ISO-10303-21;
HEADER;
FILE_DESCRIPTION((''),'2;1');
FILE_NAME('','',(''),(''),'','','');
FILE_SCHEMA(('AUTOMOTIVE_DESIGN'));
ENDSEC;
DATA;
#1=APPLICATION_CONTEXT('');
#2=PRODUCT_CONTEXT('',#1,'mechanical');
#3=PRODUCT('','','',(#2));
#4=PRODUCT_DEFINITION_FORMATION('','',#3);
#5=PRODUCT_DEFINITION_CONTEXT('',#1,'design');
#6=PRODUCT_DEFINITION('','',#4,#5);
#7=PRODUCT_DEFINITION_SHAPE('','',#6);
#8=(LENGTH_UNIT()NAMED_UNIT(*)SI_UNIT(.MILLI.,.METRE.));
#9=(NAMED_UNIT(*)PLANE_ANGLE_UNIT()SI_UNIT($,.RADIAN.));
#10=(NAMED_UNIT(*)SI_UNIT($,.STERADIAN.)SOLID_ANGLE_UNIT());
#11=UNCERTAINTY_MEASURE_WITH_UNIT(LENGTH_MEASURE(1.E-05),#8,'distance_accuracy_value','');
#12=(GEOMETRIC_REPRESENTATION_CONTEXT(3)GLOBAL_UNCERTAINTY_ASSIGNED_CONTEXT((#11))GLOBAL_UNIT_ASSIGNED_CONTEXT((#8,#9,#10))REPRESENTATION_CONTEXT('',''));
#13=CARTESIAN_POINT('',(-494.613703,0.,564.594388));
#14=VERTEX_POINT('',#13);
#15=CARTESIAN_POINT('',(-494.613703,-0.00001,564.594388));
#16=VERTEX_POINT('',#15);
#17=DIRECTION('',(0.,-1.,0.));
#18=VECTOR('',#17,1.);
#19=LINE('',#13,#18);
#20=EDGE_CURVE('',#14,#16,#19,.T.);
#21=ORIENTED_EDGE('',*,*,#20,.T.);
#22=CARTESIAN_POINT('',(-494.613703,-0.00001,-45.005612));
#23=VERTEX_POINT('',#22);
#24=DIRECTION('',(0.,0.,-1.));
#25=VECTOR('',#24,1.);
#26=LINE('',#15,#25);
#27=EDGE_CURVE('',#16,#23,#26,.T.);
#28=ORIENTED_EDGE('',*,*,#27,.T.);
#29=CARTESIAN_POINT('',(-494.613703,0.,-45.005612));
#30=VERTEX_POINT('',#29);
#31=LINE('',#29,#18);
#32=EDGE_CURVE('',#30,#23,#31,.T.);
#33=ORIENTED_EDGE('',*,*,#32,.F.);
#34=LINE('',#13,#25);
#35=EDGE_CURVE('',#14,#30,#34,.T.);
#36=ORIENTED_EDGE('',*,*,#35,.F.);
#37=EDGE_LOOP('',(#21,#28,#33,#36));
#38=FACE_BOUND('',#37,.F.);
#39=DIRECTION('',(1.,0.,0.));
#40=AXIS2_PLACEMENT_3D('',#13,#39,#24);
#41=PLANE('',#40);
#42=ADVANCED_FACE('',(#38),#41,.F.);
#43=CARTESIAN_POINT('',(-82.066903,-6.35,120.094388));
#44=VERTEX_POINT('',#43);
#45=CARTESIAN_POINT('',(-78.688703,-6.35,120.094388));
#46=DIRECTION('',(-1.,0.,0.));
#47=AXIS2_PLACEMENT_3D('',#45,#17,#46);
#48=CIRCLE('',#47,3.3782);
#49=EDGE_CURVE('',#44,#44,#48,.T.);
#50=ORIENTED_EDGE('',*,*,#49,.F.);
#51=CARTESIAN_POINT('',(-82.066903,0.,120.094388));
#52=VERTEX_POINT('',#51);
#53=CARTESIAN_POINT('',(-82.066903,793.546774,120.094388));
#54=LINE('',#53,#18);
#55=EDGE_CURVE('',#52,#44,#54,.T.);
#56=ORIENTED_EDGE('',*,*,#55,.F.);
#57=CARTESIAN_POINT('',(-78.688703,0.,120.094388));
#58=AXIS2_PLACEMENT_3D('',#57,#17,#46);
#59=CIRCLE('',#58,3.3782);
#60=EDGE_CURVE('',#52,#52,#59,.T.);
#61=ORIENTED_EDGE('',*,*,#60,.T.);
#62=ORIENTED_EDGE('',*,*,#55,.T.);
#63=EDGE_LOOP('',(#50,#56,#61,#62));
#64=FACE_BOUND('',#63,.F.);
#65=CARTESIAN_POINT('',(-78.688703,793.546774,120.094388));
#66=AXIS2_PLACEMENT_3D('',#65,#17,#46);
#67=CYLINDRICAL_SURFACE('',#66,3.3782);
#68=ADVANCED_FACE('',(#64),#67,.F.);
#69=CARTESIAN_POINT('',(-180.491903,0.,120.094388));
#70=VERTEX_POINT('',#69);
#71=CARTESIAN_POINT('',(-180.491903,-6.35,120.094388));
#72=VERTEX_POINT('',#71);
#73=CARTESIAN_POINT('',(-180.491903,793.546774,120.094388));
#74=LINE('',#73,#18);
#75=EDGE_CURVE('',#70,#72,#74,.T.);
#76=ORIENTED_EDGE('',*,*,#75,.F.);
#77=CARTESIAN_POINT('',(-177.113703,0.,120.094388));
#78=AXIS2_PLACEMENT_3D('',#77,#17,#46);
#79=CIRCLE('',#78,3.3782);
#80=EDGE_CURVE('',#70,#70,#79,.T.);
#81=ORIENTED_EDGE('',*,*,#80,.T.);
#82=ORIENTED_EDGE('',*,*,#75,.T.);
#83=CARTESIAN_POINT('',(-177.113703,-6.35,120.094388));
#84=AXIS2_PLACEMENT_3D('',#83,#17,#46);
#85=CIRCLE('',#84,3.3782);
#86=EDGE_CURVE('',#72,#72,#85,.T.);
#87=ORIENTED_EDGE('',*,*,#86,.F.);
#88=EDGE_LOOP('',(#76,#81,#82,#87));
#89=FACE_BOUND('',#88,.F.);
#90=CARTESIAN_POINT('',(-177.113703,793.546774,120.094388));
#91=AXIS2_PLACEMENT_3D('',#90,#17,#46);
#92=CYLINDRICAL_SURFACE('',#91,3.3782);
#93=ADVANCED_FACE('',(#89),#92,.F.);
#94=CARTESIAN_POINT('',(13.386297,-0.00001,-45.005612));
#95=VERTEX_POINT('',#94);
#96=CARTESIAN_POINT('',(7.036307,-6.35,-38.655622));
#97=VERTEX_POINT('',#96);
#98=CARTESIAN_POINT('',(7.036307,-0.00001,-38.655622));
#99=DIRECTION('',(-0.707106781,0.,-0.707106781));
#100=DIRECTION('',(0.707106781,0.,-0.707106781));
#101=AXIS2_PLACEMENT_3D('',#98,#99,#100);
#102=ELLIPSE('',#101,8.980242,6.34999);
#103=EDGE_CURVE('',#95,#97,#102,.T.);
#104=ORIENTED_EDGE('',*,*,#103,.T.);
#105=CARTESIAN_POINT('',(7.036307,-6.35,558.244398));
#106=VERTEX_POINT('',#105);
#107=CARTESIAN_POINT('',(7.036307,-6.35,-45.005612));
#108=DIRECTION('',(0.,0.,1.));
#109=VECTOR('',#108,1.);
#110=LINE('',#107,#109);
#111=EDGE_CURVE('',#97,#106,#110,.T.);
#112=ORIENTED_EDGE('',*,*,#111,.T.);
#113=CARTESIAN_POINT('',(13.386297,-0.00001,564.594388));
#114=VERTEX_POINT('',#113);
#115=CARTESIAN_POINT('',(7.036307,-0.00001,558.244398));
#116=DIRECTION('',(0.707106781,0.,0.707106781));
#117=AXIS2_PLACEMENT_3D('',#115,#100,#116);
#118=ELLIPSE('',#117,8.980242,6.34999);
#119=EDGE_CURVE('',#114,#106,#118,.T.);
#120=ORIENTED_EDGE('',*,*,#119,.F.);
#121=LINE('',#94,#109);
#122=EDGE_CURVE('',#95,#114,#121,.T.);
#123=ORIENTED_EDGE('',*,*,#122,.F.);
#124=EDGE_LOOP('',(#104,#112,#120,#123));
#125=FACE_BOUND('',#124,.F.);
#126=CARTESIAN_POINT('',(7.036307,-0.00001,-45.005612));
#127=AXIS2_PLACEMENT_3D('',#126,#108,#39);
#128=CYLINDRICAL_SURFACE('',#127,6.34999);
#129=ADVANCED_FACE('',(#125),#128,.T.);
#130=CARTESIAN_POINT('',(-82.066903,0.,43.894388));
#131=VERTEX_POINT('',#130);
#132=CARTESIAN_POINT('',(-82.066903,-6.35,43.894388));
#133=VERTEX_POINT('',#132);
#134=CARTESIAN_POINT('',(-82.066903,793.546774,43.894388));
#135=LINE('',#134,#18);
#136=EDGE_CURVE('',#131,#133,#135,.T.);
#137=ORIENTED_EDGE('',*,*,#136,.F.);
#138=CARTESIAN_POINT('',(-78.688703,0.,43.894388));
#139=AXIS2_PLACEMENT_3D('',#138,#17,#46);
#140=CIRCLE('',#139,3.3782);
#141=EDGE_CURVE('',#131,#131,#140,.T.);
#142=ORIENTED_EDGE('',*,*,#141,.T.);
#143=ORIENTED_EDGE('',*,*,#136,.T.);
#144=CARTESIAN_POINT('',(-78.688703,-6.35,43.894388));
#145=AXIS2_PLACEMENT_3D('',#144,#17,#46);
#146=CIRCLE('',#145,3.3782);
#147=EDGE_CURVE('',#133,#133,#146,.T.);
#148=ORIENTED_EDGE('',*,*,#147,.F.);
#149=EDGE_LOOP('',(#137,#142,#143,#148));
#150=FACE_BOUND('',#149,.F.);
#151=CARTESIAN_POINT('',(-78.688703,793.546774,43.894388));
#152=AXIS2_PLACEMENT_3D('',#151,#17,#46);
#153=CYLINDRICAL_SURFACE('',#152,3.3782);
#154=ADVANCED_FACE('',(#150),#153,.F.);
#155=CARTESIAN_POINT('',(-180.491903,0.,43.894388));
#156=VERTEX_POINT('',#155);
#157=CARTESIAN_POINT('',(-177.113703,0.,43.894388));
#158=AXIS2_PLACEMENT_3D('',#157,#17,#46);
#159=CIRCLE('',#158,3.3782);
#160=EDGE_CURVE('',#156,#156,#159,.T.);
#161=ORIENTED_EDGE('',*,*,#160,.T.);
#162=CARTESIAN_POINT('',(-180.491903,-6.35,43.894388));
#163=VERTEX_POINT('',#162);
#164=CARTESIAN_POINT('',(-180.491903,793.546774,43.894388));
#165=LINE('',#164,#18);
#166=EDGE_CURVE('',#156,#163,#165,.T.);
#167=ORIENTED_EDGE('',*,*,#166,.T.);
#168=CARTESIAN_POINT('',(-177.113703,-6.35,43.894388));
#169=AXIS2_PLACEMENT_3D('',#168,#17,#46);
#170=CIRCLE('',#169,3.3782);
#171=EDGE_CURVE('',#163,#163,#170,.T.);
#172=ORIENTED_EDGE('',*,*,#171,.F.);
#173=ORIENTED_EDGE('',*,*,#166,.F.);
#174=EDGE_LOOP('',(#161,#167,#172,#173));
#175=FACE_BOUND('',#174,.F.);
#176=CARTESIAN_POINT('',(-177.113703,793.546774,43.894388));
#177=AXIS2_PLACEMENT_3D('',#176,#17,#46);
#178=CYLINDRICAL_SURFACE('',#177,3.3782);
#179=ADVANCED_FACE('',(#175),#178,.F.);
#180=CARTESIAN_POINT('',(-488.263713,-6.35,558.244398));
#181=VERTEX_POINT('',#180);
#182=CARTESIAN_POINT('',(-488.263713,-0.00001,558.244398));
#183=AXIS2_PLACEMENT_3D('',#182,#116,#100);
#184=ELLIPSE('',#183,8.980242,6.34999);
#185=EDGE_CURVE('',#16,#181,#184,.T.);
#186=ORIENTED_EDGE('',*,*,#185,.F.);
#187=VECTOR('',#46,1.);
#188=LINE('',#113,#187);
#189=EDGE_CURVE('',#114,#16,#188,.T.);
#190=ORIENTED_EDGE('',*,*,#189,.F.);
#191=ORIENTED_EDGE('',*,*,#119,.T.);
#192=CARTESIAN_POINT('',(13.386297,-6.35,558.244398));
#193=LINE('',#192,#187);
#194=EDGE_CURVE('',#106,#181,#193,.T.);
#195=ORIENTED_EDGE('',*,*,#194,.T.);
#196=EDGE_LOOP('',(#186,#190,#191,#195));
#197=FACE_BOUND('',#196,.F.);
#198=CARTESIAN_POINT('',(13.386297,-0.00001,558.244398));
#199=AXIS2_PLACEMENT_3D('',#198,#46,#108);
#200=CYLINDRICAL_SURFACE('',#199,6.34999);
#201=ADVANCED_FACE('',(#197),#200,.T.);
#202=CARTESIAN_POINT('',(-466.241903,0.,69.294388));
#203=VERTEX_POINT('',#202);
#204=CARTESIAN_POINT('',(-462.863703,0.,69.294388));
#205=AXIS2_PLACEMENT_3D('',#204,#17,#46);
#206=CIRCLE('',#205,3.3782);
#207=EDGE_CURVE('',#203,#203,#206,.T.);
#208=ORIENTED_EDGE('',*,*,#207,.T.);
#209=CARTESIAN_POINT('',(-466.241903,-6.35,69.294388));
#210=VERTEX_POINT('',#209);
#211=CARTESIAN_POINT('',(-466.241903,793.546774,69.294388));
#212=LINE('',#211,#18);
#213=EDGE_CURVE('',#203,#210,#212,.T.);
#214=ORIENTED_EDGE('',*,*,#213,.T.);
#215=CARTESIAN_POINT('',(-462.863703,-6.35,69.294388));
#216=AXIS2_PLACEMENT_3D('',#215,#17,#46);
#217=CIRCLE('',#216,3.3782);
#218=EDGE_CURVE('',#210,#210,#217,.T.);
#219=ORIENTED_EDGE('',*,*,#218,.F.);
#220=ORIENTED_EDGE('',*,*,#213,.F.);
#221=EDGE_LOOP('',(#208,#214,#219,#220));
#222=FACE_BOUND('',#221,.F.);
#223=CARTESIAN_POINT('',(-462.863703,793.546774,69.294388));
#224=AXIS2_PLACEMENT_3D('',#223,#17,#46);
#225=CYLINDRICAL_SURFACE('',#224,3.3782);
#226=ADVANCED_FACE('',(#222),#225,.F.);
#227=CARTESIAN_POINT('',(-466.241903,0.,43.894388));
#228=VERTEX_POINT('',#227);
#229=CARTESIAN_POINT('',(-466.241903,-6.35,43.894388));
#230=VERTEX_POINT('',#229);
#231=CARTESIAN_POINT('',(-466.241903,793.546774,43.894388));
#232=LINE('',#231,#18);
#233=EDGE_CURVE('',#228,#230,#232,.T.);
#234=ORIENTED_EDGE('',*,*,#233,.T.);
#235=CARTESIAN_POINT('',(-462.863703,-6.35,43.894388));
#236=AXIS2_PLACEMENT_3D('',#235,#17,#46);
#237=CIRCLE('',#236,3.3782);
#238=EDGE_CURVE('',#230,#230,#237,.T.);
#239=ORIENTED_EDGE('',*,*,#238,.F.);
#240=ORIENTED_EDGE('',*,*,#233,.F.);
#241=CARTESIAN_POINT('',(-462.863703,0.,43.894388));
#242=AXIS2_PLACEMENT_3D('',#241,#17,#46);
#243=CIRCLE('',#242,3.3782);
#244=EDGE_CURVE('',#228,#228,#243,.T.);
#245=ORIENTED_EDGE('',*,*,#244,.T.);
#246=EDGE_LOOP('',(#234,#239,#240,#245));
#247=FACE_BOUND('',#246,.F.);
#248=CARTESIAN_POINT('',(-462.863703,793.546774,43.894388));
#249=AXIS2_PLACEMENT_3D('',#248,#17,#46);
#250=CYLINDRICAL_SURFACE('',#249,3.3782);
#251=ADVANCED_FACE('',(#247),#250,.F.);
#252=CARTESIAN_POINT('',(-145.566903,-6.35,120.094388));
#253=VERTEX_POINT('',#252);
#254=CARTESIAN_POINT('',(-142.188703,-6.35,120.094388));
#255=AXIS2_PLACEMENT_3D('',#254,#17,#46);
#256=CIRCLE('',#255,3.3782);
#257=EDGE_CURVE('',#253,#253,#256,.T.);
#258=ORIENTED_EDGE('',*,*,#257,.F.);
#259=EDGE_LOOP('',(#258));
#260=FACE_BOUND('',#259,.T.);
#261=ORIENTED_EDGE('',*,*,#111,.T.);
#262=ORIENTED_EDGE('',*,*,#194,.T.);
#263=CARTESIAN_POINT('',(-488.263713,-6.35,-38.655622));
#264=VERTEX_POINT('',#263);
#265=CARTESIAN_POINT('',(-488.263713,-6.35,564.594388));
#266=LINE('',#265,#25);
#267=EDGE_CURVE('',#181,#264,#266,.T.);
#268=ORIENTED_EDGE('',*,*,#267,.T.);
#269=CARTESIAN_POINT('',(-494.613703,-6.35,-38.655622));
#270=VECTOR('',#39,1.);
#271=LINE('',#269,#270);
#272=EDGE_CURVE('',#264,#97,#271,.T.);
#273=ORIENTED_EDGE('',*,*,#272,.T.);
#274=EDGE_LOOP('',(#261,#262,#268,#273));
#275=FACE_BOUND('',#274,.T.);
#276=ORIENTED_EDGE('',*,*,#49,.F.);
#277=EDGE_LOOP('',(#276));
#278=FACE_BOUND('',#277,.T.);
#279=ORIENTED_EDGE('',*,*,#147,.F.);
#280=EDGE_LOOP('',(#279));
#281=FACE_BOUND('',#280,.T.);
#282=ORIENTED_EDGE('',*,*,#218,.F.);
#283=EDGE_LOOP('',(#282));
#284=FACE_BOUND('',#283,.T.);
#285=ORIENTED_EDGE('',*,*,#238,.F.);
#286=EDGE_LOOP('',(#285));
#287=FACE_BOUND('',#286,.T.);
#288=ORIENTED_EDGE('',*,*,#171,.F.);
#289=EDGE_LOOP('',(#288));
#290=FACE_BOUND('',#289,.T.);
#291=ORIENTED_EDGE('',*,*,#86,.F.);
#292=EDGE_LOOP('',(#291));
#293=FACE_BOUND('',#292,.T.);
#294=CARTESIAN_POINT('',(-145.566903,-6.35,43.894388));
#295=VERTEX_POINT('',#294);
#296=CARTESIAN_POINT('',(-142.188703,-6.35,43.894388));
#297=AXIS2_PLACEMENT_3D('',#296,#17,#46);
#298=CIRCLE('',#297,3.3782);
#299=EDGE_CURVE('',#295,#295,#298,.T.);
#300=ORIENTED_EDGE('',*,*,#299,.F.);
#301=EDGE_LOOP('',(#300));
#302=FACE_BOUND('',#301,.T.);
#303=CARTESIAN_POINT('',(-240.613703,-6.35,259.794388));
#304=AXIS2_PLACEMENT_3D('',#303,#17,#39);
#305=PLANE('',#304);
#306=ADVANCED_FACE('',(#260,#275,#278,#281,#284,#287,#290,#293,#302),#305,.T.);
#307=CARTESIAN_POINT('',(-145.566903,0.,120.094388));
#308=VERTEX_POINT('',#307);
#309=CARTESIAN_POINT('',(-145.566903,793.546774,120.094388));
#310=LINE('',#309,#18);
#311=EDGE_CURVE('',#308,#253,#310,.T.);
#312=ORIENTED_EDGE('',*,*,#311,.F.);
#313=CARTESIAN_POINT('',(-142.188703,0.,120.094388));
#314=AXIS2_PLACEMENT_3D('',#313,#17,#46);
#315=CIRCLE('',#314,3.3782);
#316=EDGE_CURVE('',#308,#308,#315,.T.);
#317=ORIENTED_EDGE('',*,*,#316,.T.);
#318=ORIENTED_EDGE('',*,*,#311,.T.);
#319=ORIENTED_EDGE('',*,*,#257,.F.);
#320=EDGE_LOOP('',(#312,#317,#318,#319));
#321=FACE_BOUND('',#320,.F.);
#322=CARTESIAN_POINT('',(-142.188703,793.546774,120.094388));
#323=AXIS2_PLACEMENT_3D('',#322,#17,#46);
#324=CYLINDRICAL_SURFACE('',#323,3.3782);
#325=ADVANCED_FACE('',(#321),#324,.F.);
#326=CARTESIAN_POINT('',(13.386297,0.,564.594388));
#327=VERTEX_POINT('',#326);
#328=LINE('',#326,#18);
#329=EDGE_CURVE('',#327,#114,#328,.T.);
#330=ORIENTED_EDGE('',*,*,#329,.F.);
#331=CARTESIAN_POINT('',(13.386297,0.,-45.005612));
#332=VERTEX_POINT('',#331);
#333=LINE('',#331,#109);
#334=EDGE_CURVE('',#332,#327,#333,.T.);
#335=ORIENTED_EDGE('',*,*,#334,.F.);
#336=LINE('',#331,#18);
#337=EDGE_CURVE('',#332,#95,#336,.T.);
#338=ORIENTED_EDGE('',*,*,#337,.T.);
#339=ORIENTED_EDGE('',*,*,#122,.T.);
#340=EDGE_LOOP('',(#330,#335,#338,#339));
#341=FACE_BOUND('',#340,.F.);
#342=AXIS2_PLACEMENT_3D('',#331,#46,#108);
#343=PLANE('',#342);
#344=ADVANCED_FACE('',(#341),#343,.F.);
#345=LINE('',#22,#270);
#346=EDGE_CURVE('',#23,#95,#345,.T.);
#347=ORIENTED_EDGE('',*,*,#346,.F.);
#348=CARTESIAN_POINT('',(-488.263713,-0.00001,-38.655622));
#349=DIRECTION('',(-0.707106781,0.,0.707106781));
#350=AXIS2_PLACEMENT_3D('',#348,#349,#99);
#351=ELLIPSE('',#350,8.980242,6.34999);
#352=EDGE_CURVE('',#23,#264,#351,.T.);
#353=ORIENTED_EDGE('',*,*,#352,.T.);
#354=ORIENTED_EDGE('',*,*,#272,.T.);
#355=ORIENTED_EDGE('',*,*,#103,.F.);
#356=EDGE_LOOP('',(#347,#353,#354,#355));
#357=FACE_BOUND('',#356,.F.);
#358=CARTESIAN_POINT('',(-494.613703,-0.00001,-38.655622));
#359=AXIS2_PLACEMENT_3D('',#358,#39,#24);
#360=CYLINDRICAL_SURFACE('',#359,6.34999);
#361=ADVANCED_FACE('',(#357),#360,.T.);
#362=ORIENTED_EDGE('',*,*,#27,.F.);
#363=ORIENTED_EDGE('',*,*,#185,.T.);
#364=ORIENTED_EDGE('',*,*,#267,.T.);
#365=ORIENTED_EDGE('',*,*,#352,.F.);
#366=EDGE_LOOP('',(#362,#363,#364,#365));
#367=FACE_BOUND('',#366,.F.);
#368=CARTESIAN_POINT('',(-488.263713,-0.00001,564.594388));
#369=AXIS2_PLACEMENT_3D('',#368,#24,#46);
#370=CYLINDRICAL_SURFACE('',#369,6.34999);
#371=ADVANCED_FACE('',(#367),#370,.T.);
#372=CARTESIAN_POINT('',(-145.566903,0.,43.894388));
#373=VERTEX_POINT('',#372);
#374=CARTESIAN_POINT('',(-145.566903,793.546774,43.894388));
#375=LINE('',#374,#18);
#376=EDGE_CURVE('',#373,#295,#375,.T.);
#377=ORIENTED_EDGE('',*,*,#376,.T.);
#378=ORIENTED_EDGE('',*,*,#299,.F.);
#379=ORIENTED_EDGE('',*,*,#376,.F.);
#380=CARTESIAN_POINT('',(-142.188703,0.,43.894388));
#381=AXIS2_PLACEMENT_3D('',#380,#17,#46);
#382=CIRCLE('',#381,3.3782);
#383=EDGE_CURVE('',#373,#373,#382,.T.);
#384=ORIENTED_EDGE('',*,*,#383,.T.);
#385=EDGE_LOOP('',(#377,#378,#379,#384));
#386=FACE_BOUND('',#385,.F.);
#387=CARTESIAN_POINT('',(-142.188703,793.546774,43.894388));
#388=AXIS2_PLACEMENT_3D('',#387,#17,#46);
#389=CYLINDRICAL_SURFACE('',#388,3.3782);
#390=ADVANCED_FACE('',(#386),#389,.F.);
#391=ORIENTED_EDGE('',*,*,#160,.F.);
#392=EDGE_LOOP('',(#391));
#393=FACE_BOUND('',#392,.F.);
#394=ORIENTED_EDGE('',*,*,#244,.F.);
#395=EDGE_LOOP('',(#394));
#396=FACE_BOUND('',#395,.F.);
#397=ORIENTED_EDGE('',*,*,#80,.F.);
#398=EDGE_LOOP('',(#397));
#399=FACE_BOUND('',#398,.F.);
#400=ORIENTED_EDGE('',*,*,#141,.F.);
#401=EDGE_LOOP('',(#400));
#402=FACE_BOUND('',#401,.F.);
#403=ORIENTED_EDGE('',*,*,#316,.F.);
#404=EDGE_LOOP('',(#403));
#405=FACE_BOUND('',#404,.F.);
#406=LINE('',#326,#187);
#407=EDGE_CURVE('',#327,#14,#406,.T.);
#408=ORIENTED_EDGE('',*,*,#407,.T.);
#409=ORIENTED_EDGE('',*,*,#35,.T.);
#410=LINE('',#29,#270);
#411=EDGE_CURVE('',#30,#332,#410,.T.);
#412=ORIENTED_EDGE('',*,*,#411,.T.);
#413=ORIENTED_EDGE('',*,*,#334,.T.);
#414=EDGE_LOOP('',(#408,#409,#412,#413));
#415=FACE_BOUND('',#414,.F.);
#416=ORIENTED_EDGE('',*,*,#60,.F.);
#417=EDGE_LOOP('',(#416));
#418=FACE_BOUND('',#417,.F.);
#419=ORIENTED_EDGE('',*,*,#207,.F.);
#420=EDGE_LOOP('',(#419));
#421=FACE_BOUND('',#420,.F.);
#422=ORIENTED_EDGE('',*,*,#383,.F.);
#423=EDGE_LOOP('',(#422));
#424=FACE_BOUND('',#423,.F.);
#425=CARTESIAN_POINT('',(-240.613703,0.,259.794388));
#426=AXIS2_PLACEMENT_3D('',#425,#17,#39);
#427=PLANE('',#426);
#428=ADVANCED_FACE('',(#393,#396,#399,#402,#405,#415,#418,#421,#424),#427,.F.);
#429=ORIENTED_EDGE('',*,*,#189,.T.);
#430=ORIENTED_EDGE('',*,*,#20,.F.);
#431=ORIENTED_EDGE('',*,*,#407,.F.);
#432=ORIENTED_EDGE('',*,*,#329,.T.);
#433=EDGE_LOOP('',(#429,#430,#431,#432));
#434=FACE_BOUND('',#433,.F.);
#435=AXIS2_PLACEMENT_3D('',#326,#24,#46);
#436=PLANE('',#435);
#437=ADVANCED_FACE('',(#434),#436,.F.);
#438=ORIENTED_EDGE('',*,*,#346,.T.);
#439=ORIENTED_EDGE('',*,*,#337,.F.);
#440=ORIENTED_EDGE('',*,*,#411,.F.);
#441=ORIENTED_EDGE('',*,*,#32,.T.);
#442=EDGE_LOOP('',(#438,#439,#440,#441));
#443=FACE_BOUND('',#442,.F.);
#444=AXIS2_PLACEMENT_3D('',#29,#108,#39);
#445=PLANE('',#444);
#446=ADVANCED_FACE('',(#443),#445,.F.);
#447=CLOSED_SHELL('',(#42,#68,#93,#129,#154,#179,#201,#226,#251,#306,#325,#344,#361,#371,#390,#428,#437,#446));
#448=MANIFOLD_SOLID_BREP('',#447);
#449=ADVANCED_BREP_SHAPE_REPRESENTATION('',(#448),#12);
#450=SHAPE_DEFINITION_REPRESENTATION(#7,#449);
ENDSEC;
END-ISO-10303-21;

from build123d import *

# Parameters (mm, degrees)
F1_DEPTH = 6.35
F2_R     = 6.34999
F3_D     = 6.7564


# Not quite as in the source:
# - a fillet or chamfer is up to 0.001 mm smaller than in the source, because OpenCascade refuses the exact size


with BuildPart() as f1:
    # F0 (on Front) → F1 (new body)
    with BuildSketch(Plane.XZ):
        Polygon((-494.6137029603, 259.7943879247), (-494.6137029603, -45.0056120753), (13.3862970397, -45.0056120753), (13.3862970397, 259.7943879247), (13.3862970397, 564.5943879247), (-494.6137029603, 564.5943879247), align=None)
    extrude(amount=F1_DEPTH)

    # F2 (radius 6.35 in the source; OpenCascade refuses exactly that, so slightly less here)
    f2_edges = [f1.edges().sort_by_distance(p)[0] for p in [
        (-494.613703, -6.35, 259.794388),
        (-240.613703, -6.35, -45.005612),
        (13.386297, -6.35, 259.794388),
        (-240.613703, -6.35, 564.594388),
    ]]
    fillet(f2_edges, radius=F2_R)

    # F3 (through all)
    with Locations(Plane(origin=(0, 0, 0), x_dir=(1, 0, 0), z_dir=(0, 1, 0))):
        with Locations((-177.1137029603, -120.0943879247), (-142.1887029603, -120.0943879247), (-78.6887029603, -120.0943879247), (-78.6887029603, -43.8943879247), (-142.1887029603, -43.8943879247), (-177.1137029603, -43.8943879247), (-462.8637029603, -69.2943879247), (-462.8637029603, -43.8943879247)):
            Hole(F3_D / 2)


solid = f1.part
